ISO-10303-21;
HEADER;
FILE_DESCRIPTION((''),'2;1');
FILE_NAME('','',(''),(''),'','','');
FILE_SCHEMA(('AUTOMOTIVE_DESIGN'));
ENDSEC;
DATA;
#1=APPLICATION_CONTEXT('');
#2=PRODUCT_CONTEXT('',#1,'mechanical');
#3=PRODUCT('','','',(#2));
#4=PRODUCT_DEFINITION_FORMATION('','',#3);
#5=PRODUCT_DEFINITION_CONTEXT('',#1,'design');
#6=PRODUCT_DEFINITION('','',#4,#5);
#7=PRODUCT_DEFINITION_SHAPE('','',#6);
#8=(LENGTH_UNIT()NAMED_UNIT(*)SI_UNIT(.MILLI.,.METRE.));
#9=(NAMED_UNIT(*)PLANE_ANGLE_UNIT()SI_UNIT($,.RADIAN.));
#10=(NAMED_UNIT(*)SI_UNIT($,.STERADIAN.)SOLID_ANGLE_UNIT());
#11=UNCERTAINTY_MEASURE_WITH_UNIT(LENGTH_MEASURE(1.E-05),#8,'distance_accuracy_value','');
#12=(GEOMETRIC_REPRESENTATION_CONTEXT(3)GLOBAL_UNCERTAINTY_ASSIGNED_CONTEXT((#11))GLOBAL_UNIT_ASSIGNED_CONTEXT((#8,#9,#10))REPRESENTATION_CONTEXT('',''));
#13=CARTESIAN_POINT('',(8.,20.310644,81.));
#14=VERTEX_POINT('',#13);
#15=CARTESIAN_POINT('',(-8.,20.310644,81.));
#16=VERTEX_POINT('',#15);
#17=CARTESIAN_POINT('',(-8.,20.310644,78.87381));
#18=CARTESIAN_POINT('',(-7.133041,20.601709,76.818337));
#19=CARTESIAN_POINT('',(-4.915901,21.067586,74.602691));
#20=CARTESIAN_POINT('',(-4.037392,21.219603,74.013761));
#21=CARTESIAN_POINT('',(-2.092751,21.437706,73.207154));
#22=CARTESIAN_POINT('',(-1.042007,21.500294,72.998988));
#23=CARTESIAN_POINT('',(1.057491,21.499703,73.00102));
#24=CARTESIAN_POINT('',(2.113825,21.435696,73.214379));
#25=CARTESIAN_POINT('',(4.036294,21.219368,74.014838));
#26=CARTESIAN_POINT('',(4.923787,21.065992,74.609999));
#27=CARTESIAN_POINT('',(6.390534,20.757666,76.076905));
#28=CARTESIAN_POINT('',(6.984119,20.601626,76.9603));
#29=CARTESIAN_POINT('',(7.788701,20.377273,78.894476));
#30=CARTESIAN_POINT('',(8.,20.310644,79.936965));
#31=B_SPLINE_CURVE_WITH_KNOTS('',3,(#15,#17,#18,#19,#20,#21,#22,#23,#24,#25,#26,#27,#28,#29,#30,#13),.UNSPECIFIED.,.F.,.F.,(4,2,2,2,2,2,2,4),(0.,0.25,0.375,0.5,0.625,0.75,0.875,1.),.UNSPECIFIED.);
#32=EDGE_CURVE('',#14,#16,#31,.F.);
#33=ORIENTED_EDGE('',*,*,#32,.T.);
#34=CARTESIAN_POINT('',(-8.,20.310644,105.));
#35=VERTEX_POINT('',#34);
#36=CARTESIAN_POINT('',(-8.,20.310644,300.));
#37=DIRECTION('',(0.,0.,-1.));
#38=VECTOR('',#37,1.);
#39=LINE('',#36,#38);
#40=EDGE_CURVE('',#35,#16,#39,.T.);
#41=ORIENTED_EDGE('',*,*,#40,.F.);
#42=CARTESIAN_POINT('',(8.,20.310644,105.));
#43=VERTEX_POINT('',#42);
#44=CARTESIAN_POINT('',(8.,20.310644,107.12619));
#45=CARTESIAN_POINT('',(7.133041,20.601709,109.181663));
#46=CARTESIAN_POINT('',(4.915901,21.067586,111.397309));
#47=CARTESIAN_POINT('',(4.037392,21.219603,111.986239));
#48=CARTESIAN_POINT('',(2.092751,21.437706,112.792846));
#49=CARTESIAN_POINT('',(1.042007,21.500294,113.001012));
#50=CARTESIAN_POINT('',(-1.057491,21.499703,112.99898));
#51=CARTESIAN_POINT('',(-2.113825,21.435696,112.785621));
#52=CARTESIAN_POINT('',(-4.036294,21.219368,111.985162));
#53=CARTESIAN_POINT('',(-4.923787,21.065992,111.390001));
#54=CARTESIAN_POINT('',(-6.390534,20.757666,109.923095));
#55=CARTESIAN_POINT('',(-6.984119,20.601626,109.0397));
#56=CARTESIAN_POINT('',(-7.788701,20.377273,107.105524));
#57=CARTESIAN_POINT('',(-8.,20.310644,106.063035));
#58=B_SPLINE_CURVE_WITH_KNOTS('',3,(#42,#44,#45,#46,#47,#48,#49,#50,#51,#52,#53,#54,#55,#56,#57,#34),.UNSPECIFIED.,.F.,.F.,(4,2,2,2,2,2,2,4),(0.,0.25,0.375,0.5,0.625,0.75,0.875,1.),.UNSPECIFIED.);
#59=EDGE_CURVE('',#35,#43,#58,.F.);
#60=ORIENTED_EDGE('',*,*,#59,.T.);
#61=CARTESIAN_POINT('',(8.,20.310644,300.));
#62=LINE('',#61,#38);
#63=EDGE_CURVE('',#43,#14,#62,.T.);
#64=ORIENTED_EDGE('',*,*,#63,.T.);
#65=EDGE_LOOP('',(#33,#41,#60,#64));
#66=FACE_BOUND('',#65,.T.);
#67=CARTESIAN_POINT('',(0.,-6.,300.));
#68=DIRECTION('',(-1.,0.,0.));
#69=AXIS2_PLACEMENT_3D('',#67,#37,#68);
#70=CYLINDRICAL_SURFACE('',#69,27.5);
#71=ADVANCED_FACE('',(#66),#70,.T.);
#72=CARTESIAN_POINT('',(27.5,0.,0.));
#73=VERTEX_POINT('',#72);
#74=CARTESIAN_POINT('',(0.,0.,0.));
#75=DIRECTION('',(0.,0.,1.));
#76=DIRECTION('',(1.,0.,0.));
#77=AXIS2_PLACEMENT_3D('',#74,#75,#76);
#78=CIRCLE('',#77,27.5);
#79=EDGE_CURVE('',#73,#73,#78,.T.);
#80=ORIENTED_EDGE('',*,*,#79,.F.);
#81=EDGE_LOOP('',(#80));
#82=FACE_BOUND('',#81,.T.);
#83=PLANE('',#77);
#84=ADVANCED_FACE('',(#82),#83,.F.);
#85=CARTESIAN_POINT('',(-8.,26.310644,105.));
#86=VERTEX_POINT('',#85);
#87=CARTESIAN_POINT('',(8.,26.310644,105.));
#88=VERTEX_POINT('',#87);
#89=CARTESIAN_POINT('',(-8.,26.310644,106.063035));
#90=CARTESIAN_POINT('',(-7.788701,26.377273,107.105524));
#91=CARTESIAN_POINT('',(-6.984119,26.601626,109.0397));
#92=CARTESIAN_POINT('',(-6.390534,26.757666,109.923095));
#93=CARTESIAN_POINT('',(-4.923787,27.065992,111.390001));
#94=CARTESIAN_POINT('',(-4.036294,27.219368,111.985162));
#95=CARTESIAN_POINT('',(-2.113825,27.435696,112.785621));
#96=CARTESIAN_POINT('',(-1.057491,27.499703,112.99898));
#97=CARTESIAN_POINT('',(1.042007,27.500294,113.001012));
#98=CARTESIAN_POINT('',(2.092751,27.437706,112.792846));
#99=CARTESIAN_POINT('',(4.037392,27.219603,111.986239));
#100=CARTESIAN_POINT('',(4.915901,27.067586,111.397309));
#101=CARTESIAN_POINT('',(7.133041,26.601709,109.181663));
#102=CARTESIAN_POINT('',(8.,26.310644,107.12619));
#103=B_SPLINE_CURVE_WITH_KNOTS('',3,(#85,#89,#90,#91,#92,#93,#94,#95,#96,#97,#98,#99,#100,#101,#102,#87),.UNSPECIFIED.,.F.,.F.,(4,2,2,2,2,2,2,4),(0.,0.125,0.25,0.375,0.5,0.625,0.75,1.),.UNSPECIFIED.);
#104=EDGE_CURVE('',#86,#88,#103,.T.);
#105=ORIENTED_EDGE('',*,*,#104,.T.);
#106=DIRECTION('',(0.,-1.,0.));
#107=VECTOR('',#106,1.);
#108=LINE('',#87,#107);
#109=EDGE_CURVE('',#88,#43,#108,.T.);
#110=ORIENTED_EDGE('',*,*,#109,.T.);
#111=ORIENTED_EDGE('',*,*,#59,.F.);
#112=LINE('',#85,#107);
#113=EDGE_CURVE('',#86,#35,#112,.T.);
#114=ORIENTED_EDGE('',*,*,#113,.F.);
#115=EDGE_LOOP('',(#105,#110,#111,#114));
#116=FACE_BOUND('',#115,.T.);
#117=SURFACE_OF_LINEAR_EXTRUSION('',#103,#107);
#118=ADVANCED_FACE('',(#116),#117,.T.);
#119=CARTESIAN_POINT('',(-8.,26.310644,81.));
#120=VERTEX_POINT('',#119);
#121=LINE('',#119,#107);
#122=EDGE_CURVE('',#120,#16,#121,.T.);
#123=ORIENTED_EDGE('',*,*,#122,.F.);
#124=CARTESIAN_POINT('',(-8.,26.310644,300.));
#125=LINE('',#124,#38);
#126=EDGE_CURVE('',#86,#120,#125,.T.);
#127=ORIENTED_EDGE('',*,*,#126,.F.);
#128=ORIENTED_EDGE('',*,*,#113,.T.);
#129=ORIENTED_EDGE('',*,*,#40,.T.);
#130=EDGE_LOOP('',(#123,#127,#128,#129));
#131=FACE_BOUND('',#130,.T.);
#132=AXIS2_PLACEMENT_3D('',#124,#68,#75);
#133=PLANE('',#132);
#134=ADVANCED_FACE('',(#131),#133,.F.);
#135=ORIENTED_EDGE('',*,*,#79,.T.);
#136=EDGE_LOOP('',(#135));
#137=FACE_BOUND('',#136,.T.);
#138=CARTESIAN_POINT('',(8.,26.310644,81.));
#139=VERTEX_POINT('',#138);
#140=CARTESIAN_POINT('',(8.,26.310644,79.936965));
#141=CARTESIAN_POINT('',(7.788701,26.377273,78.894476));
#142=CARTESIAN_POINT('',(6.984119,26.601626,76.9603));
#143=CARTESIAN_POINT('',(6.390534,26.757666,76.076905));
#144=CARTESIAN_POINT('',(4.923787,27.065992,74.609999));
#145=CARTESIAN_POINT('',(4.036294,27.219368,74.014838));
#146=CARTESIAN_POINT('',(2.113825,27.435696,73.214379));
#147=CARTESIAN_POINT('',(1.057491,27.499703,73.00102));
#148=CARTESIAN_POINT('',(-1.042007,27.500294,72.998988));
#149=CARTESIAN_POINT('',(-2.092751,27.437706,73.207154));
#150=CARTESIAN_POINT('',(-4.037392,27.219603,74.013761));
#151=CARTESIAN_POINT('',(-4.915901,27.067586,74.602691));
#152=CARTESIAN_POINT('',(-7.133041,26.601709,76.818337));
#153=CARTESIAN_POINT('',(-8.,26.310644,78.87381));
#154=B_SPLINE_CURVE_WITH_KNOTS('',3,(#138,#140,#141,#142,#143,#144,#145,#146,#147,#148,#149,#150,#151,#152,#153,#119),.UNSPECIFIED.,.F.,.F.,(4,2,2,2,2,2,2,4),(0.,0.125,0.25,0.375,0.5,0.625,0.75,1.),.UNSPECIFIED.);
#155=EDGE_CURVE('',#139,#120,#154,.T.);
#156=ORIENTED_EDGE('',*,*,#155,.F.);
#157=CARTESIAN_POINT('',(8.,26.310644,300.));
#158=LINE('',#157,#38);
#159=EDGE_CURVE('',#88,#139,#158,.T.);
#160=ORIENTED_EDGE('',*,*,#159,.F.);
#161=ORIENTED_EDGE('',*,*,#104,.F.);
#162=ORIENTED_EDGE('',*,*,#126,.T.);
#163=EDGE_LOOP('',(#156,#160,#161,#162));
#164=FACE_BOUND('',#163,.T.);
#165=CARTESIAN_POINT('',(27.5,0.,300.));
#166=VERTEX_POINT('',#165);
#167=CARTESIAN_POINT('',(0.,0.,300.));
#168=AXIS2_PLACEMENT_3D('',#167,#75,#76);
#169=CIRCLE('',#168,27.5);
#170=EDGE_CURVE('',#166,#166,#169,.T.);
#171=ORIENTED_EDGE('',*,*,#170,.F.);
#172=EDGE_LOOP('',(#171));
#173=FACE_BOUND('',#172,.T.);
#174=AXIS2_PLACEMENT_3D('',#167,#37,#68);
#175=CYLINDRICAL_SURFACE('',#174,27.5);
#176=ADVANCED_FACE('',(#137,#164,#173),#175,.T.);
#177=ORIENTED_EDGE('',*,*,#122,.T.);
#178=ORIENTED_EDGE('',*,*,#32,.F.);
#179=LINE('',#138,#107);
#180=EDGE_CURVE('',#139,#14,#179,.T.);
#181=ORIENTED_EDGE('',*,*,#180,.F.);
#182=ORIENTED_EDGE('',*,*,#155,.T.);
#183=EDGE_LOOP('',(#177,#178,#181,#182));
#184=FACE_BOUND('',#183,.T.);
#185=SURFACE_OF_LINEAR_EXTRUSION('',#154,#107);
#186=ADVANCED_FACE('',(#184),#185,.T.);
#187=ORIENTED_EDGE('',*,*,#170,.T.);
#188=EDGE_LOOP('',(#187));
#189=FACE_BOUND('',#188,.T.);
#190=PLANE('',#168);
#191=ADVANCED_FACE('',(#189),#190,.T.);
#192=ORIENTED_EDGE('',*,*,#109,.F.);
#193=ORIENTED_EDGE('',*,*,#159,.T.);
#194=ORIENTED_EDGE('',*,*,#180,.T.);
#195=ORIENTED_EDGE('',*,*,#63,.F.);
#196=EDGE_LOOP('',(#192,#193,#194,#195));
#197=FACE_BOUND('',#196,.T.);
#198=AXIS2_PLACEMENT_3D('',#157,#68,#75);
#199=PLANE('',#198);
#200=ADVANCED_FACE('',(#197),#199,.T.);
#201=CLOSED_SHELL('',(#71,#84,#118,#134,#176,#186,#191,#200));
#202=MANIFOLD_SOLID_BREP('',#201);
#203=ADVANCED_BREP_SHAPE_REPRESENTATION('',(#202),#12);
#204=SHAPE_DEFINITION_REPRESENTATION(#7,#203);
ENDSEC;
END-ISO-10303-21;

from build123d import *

# Parameters (mm, degrees)
SKETCH1_R            = 27.5
BOSS_EXTRUDE1_DEPTH  = 300
CUT_EXTRUDE1_START   = 21.500000052
CUT_EXTRUDE1_DEPTH   = 7.499999948
CUT_EXTRUDE1_START_2 = 20.310644134
CUT_EXTRUDE1_2_DEPTH = 1.189355918
CUT_EXTRUDE1_START_3 = 72.999999946
CUT_EXTRUDE1_3_DEPTH = 40.000000108


with BuildPart() as part:
    # Sketch1 → Boss-Extrude1 (new body)
    with BuildSketch(Plane.XY):
        Circle(SKETCH1_R)
    extrude(amount=BOSS_EXTRUDE1_DEPTH)

    # Cut-Extrude1: read off the stored shape, not the designer's step
    # Cut-Extrude1 outline → Cut-Extrude1 (cut)
    with BuildSketch(Plane(origin=(0, 0, 0), x_dir=(1, 0, 0), z_dir=(0, 1, 0)).offset(CUT_EXTRUDE1_START)):
        with BuildLine():
            Line((-8, -81), (-8, -105))
            add(Edge.make_bspline(
                [(-8, -105), (-8, -106.063035006), (-7.788701178, -107.105523906), (-6.984119374, -109.039699683), (-6.390533847, -109.923095258), (-4.923786882, -111.390000979), (-4.036294094, -111.985161837), (-2.113824822, -112.785621396), (-1.057490709, -112.998980405), (1.04200741, -113.001012103), (2.09275073, -112.792846435), (4.037391687, -111.986238583), (4.915900837, -111.397309074), (7.133041074, -109.181662675), (8, -107.126189888), (8, -105)],
                knots=[0, 0, 0, 0, 0.125, 0.125, 0.25, 0.25, 0.375, 0.375, 0.5, 0.5, 0.625, 0.625, 0.75, 0.75, 1, 1, 1, 1], degree=3))
            Line((8, -105), (8, -81))
            add(Edge.make_bspline(
                [(8, -81), (8, -79.936964994), (7.788701178, -78.894476094), (6.984119374, -76.960300317), (6.390533847, -76.076904742), (4.923786882, -74.609999021), (4.036294094, -74.014838163), (2.113824822, -73.214378604), (1.057490709, -73.001019595), (-1.04200741, -72.998987897), (-2.09275073, -73.207153565), (-4.037391687, -74.013761417), (-4.915900837, -74.602690926), (-7.133041074, -76.818337325), (-8, -78.873810112), (-8, -81)],
                knots=[0, 0, 0, 0, 0.125, 0.125, 0.25, 0.25, 0.375, 0.375, 0.5, 0.5, 0.625, 0.625, 0.75, 0.75, 1, 1, 1, 1], degree=3))
        make_face()
    extrude(amount=CUT_EXTRUDE1_DEPTH, mode=Mode.SUBTRACT)

    # Cut-Extrude1 2 outline → Cut-Extrude1 2 (cut)
    with BuildSketch(Plane(origin=(0, 0, 0), x_dir=(1, 0, 0), z_dir=(0, 1, 0)).offset(CUT_EXTRUDE1_START_2)):
        with BuildLine():
            Line((-8, -81), (-8, -105))
            add(Edge.make_bspline(
                [(-8, -105), (-8, -106.063035006), (-7.788701178, -107.105523906), (-6.984119374, -109.039699683), (-6.390533847, -109.923095258), (-4.923786882, -111.390000979), (-4.036294094, -111.985161837), (-2.113824822, -112.785621396), (-1.057490709, -112.998980405), (1.04200741, -113.001012103), (2.09275073, -112.792846435), (4.037391687, -111.986238583), (4.915900837, -111.397309074), (7.133041074, -109.181662675), (8, -107.126189888), (8, -105)],
                knots=[0, 0, 0, 0, 0.125, 0.125, 0.25, 0.25, 0.375, 0.375, 0.5, 0.5, 0.625, 0.625, 0.75, 0.75, 1, 1, 1, 1], degree=3))
            Line((8, -105), (8, -81))
            add(Edge.make_bspline(
                [(8, -81), (8, -79.936964994), (7.788701178, -78.894476094), (6.984119374, -76.960300317), (6.390533847, -76.076904742), (4.923786882, -74.609999021), (4.036294094, -74.014838163), (2.113824822, -73.214378604), (1.057490709, -73.001019595), (-1.04200741, -72.998987897), (-2.09275073, -73.207153565), (-4.037391687, -74.013761417), (-4.915900837, -74.602690926), (-7.133041074, -76.818337325), (-8, -78.873810112), (-8, -81)],
                knots=[0, 0, 0, 0, 0.125, 0.125, 0.25, 0.25, 0.375, 0.375, 0.5, 0.5, 0.625, 0.625, 0.75, 0.75, 1, 1, 1, 1], degree=3))
        make_face()
    extrude(amount=CUT_EXTRUDE1_2_DEPTH, mode=Mode.SUBTRACT)

    # Cut-Extrude1 3 outline → Cut-Extrude1 3 (add)
    with BuildSketch(Plane.XY.offset(CUT_EXTRUDE1_START_3)):
        with BuildLine():
            ThreePointArc((8, 20.310644234), (0, 21.5), (-8, 20.310644234))
            Line((-8, 20.310644234), (8, 20.310644234))
        make_face()
    extrude(amount=CUT_EXTRUDE1_3_DEPTH)


solid = part.part
